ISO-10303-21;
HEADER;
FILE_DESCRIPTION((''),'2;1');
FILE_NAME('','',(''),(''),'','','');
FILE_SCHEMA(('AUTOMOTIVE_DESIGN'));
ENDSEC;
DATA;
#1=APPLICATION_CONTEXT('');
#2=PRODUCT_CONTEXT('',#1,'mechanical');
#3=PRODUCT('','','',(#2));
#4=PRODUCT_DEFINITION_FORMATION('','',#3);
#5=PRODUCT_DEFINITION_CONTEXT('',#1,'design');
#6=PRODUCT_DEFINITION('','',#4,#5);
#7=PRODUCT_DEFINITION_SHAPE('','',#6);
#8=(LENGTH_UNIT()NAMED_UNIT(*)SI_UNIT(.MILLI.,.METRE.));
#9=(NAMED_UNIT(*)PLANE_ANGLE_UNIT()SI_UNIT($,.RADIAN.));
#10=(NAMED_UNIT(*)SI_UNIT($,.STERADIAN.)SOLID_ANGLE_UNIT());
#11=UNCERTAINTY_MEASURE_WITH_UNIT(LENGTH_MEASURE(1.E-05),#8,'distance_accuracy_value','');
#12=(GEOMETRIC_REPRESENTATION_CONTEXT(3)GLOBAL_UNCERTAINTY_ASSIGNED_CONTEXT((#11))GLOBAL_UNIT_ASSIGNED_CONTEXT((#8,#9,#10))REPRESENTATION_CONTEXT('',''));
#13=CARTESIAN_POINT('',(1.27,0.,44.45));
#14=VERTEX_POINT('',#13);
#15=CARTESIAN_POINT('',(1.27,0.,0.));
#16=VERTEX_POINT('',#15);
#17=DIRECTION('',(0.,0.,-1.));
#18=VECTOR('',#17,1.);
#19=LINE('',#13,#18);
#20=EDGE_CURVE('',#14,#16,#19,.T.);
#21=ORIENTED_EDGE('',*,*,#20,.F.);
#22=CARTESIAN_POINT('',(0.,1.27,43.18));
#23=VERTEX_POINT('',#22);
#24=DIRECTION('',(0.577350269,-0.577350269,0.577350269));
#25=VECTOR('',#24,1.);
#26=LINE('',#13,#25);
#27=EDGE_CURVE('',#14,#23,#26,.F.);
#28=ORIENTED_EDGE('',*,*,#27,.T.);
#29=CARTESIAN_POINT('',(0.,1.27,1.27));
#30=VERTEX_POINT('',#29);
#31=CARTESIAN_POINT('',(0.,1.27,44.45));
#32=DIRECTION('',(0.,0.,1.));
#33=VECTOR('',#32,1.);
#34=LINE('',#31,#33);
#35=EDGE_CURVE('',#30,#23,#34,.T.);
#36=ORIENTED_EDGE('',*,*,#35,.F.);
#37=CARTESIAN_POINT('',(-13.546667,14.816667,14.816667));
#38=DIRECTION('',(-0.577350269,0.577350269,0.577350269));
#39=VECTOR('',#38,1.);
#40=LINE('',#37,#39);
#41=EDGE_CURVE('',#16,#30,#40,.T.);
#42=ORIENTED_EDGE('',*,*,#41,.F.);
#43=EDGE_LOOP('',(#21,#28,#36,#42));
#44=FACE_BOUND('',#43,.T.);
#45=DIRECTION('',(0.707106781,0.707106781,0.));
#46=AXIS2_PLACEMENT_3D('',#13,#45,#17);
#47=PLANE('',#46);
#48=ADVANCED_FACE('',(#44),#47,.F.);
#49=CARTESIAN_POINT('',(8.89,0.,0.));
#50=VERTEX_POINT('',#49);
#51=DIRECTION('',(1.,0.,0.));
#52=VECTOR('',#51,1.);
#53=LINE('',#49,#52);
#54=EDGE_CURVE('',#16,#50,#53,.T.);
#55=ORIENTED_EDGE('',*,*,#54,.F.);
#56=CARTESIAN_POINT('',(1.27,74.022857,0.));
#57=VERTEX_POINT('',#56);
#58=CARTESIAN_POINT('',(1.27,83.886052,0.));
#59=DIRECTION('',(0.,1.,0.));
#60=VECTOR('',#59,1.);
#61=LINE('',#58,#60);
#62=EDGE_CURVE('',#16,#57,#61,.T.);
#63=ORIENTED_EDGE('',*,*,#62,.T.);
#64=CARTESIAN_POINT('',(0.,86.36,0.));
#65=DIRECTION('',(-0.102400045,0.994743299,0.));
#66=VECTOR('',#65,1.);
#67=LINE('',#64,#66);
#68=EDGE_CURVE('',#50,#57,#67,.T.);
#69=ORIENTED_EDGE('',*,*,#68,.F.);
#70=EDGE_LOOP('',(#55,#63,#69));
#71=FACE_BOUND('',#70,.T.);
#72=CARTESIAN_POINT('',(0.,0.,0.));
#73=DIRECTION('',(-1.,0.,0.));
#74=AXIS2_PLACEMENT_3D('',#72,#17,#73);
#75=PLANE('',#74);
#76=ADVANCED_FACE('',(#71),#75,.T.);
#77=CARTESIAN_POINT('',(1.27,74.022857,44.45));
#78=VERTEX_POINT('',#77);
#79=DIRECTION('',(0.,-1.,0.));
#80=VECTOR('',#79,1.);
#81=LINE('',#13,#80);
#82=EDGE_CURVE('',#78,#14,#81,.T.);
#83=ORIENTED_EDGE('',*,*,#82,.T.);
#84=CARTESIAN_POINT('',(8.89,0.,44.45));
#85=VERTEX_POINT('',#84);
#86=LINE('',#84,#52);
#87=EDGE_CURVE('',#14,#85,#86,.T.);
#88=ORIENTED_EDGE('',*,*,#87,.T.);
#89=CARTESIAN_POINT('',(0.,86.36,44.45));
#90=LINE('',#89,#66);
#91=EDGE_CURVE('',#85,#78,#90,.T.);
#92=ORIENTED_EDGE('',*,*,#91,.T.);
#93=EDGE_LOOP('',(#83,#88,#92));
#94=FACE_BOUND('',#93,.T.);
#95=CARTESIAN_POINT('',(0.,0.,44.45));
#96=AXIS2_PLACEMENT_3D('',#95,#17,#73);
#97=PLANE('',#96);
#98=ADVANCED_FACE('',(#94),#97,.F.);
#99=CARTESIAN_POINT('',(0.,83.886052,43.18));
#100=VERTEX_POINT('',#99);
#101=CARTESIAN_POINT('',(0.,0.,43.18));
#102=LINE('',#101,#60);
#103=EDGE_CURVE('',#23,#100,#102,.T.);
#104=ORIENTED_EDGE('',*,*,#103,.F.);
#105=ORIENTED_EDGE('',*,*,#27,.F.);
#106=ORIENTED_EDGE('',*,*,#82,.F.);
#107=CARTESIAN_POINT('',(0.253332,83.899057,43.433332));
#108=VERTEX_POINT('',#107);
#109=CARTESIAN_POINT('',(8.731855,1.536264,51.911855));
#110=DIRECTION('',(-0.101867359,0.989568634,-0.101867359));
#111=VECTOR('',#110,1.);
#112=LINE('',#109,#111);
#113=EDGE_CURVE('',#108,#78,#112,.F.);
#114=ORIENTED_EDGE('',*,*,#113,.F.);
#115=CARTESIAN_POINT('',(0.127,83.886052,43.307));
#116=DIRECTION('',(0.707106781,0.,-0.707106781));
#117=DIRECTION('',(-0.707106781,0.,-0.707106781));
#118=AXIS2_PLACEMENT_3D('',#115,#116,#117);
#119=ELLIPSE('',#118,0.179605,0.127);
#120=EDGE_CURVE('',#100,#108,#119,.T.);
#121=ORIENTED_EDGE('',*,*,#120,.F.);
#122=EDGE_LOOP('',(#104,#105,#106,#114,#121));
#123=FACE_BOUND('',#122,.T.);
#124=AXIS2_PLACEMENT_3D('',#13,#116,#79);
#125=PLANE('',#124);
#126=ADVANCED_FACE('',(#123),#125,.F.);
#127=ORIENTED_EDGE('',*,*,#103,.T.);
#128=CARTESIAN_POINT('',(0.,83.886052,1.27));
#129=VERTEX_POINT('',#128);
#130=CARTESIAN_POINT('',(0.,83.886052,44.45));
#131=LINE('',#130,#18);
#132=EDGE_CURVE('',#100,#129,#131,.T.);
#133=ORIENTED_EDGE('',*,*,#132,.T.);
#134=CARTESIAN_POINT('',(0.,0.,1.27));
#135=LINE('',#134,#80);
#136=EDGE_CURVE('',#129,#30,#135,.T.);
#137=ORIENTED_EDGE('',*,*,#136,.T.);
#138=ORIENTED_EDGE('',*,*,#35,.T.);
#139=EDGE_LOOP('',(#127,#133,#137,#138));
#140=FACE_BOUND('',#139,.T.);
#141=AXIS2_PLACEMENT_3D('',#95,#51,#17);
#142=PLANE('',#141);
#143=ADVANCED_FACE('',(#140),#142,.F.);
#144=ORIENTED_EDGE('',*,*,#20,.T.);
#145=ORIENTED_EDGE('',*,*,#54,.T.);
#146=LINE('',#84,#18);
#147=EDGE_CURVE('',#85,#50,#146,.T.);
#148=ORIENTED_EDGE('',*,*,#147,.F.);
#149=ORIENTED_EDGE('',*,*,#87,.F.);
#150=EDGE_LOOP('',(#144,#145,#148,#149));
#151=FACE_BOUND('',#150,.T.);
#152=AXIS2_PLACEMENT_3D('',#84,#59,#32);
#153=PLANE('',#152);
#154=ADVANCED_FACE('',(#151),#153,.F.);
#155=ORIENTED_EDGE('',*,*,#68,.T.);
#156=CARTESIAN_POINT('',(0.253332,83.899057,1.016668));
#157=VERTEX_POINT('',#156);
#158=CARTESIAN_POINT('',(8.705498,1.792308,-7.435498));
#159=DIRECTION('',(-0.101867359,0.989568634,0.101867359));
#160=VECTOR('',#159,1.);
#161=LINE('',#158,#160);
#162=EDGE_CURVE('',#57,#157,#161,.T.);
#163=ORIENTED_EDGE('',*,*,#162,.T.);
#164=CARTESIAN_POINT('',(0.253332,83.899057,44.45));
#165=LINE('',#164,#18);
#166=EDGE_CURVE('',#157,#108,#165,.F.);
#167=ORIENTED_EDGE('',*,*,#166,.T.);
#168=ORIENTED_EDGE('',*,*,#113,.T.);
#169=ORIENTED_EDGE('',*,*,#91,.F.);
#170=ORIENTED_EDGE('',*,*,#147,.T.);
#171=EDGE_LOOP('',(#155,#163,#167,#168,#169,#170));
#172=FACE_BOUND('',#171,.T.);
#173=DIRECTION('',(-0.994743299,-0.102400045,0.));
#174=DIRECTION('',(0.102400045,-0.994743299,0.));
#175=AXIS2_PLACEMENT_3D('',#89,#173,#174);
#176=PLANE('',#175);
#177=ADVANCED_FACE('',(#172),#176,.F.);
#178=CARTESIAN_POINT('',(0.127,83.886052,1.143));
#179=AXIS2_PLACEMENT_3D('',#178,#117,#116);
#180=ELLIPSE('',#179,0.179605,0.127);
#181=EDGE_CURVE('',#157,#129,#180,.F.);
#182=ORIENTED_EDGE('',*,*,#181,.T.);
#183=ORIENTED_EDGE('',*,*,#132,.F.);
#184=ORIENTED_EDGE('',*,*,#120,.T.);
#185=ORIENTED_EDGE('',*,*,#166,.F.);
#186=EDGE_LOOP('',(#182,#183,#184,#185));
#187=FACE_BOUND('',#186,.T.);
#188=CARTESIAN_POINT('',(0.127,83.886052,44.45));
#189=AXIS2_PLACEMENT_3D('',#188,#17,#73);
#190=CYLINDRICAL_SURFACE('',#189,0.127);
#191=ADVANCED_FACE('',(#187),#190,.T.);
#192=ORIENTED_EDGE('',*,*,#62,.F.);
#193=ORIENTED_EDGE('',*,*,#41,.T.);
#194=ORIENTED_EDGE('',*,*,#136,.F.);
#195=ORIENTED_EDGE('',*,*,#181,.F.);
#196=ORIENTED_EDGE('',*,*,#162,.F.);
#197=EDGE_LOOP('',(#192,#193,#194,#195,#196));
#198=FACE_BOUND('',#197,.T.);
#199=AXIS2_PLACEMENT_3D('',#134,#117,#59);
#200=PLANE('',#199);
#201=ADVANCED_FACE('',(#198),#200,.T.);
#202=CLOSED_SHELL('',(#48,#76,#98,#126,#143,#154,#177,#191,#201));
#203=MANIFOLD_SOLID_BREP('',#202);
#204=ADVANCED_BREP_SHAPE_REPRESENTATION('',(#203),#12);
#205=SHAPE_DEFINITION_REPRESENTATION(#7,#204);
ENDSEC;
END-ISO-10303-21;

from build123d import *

# Parameters (mm, degrees)
BOSS_EXTRUDE1_DEPTH = 44.45
FILLET1_R           = 0.127
CHAMFER2_SIZE       = 1.27


with BuildPart() as part:
    # Sketch1 → Boss-Extrude1 (new body)
    with BuildSketch(Plane.XY):
        Polygon((0, 0), (0, 86.36), (8.89, 0), align=None)
    extrude(amount=BOSS_EXTRUDE1_DEPTH)

    # Fillet1
    fillet1_edges = [part.edges().sort_by_distance(p)[0] for p in [
        (0, 86.36, 22.225),
    ]]
    fillet(fillet1_edges, radius=FILLET1_R)

    # Chamfer2
    # the kernel refuses this chamfer: 1.27 mm, written as the material it takes off along each edge
    with BuildSketch(Plane(origin=(0, -3.266037395, 0), x_dir=(0, 0, 1), z_dir=(0, 1, 0))) as chamfer2_piece_1:
        Polygon((CHAMFER2_SIZE, 0), (0, CHAMFER2_SIZE), (0, 0), align=None)
    extrude(amount=90.418126679, mode=Mode.SUBTRACT)
    with BuildSketch(Plane(origin=(0, 0, -3.266037395), x_dir=(0, 1, 0), z_dir=(0, 0, 1))) as chamfer2_piece_2:
        Polygon((CHAMFER2_SIZE, 0), (0, -CHAMFER2_SIZE), (0, 0), align=None)
    extrude(amount=50.982074789, mode=Mode.SUBTRACT)
    with BuildSketch(Plane(origin=(0, -3.266037395, 44.45), x_dir=(0, 0, -1), z_dir=(0, 1, 0))) as chamfer2_piece_3:
        Polygon((CHAMFER2_SIZE, 0), (0, -CHAMFER2_SIZE), (0, 0), align=None)
    extrude(amount=90.418126679, mode=Mode.SUBTRACT)


solid = part.part
